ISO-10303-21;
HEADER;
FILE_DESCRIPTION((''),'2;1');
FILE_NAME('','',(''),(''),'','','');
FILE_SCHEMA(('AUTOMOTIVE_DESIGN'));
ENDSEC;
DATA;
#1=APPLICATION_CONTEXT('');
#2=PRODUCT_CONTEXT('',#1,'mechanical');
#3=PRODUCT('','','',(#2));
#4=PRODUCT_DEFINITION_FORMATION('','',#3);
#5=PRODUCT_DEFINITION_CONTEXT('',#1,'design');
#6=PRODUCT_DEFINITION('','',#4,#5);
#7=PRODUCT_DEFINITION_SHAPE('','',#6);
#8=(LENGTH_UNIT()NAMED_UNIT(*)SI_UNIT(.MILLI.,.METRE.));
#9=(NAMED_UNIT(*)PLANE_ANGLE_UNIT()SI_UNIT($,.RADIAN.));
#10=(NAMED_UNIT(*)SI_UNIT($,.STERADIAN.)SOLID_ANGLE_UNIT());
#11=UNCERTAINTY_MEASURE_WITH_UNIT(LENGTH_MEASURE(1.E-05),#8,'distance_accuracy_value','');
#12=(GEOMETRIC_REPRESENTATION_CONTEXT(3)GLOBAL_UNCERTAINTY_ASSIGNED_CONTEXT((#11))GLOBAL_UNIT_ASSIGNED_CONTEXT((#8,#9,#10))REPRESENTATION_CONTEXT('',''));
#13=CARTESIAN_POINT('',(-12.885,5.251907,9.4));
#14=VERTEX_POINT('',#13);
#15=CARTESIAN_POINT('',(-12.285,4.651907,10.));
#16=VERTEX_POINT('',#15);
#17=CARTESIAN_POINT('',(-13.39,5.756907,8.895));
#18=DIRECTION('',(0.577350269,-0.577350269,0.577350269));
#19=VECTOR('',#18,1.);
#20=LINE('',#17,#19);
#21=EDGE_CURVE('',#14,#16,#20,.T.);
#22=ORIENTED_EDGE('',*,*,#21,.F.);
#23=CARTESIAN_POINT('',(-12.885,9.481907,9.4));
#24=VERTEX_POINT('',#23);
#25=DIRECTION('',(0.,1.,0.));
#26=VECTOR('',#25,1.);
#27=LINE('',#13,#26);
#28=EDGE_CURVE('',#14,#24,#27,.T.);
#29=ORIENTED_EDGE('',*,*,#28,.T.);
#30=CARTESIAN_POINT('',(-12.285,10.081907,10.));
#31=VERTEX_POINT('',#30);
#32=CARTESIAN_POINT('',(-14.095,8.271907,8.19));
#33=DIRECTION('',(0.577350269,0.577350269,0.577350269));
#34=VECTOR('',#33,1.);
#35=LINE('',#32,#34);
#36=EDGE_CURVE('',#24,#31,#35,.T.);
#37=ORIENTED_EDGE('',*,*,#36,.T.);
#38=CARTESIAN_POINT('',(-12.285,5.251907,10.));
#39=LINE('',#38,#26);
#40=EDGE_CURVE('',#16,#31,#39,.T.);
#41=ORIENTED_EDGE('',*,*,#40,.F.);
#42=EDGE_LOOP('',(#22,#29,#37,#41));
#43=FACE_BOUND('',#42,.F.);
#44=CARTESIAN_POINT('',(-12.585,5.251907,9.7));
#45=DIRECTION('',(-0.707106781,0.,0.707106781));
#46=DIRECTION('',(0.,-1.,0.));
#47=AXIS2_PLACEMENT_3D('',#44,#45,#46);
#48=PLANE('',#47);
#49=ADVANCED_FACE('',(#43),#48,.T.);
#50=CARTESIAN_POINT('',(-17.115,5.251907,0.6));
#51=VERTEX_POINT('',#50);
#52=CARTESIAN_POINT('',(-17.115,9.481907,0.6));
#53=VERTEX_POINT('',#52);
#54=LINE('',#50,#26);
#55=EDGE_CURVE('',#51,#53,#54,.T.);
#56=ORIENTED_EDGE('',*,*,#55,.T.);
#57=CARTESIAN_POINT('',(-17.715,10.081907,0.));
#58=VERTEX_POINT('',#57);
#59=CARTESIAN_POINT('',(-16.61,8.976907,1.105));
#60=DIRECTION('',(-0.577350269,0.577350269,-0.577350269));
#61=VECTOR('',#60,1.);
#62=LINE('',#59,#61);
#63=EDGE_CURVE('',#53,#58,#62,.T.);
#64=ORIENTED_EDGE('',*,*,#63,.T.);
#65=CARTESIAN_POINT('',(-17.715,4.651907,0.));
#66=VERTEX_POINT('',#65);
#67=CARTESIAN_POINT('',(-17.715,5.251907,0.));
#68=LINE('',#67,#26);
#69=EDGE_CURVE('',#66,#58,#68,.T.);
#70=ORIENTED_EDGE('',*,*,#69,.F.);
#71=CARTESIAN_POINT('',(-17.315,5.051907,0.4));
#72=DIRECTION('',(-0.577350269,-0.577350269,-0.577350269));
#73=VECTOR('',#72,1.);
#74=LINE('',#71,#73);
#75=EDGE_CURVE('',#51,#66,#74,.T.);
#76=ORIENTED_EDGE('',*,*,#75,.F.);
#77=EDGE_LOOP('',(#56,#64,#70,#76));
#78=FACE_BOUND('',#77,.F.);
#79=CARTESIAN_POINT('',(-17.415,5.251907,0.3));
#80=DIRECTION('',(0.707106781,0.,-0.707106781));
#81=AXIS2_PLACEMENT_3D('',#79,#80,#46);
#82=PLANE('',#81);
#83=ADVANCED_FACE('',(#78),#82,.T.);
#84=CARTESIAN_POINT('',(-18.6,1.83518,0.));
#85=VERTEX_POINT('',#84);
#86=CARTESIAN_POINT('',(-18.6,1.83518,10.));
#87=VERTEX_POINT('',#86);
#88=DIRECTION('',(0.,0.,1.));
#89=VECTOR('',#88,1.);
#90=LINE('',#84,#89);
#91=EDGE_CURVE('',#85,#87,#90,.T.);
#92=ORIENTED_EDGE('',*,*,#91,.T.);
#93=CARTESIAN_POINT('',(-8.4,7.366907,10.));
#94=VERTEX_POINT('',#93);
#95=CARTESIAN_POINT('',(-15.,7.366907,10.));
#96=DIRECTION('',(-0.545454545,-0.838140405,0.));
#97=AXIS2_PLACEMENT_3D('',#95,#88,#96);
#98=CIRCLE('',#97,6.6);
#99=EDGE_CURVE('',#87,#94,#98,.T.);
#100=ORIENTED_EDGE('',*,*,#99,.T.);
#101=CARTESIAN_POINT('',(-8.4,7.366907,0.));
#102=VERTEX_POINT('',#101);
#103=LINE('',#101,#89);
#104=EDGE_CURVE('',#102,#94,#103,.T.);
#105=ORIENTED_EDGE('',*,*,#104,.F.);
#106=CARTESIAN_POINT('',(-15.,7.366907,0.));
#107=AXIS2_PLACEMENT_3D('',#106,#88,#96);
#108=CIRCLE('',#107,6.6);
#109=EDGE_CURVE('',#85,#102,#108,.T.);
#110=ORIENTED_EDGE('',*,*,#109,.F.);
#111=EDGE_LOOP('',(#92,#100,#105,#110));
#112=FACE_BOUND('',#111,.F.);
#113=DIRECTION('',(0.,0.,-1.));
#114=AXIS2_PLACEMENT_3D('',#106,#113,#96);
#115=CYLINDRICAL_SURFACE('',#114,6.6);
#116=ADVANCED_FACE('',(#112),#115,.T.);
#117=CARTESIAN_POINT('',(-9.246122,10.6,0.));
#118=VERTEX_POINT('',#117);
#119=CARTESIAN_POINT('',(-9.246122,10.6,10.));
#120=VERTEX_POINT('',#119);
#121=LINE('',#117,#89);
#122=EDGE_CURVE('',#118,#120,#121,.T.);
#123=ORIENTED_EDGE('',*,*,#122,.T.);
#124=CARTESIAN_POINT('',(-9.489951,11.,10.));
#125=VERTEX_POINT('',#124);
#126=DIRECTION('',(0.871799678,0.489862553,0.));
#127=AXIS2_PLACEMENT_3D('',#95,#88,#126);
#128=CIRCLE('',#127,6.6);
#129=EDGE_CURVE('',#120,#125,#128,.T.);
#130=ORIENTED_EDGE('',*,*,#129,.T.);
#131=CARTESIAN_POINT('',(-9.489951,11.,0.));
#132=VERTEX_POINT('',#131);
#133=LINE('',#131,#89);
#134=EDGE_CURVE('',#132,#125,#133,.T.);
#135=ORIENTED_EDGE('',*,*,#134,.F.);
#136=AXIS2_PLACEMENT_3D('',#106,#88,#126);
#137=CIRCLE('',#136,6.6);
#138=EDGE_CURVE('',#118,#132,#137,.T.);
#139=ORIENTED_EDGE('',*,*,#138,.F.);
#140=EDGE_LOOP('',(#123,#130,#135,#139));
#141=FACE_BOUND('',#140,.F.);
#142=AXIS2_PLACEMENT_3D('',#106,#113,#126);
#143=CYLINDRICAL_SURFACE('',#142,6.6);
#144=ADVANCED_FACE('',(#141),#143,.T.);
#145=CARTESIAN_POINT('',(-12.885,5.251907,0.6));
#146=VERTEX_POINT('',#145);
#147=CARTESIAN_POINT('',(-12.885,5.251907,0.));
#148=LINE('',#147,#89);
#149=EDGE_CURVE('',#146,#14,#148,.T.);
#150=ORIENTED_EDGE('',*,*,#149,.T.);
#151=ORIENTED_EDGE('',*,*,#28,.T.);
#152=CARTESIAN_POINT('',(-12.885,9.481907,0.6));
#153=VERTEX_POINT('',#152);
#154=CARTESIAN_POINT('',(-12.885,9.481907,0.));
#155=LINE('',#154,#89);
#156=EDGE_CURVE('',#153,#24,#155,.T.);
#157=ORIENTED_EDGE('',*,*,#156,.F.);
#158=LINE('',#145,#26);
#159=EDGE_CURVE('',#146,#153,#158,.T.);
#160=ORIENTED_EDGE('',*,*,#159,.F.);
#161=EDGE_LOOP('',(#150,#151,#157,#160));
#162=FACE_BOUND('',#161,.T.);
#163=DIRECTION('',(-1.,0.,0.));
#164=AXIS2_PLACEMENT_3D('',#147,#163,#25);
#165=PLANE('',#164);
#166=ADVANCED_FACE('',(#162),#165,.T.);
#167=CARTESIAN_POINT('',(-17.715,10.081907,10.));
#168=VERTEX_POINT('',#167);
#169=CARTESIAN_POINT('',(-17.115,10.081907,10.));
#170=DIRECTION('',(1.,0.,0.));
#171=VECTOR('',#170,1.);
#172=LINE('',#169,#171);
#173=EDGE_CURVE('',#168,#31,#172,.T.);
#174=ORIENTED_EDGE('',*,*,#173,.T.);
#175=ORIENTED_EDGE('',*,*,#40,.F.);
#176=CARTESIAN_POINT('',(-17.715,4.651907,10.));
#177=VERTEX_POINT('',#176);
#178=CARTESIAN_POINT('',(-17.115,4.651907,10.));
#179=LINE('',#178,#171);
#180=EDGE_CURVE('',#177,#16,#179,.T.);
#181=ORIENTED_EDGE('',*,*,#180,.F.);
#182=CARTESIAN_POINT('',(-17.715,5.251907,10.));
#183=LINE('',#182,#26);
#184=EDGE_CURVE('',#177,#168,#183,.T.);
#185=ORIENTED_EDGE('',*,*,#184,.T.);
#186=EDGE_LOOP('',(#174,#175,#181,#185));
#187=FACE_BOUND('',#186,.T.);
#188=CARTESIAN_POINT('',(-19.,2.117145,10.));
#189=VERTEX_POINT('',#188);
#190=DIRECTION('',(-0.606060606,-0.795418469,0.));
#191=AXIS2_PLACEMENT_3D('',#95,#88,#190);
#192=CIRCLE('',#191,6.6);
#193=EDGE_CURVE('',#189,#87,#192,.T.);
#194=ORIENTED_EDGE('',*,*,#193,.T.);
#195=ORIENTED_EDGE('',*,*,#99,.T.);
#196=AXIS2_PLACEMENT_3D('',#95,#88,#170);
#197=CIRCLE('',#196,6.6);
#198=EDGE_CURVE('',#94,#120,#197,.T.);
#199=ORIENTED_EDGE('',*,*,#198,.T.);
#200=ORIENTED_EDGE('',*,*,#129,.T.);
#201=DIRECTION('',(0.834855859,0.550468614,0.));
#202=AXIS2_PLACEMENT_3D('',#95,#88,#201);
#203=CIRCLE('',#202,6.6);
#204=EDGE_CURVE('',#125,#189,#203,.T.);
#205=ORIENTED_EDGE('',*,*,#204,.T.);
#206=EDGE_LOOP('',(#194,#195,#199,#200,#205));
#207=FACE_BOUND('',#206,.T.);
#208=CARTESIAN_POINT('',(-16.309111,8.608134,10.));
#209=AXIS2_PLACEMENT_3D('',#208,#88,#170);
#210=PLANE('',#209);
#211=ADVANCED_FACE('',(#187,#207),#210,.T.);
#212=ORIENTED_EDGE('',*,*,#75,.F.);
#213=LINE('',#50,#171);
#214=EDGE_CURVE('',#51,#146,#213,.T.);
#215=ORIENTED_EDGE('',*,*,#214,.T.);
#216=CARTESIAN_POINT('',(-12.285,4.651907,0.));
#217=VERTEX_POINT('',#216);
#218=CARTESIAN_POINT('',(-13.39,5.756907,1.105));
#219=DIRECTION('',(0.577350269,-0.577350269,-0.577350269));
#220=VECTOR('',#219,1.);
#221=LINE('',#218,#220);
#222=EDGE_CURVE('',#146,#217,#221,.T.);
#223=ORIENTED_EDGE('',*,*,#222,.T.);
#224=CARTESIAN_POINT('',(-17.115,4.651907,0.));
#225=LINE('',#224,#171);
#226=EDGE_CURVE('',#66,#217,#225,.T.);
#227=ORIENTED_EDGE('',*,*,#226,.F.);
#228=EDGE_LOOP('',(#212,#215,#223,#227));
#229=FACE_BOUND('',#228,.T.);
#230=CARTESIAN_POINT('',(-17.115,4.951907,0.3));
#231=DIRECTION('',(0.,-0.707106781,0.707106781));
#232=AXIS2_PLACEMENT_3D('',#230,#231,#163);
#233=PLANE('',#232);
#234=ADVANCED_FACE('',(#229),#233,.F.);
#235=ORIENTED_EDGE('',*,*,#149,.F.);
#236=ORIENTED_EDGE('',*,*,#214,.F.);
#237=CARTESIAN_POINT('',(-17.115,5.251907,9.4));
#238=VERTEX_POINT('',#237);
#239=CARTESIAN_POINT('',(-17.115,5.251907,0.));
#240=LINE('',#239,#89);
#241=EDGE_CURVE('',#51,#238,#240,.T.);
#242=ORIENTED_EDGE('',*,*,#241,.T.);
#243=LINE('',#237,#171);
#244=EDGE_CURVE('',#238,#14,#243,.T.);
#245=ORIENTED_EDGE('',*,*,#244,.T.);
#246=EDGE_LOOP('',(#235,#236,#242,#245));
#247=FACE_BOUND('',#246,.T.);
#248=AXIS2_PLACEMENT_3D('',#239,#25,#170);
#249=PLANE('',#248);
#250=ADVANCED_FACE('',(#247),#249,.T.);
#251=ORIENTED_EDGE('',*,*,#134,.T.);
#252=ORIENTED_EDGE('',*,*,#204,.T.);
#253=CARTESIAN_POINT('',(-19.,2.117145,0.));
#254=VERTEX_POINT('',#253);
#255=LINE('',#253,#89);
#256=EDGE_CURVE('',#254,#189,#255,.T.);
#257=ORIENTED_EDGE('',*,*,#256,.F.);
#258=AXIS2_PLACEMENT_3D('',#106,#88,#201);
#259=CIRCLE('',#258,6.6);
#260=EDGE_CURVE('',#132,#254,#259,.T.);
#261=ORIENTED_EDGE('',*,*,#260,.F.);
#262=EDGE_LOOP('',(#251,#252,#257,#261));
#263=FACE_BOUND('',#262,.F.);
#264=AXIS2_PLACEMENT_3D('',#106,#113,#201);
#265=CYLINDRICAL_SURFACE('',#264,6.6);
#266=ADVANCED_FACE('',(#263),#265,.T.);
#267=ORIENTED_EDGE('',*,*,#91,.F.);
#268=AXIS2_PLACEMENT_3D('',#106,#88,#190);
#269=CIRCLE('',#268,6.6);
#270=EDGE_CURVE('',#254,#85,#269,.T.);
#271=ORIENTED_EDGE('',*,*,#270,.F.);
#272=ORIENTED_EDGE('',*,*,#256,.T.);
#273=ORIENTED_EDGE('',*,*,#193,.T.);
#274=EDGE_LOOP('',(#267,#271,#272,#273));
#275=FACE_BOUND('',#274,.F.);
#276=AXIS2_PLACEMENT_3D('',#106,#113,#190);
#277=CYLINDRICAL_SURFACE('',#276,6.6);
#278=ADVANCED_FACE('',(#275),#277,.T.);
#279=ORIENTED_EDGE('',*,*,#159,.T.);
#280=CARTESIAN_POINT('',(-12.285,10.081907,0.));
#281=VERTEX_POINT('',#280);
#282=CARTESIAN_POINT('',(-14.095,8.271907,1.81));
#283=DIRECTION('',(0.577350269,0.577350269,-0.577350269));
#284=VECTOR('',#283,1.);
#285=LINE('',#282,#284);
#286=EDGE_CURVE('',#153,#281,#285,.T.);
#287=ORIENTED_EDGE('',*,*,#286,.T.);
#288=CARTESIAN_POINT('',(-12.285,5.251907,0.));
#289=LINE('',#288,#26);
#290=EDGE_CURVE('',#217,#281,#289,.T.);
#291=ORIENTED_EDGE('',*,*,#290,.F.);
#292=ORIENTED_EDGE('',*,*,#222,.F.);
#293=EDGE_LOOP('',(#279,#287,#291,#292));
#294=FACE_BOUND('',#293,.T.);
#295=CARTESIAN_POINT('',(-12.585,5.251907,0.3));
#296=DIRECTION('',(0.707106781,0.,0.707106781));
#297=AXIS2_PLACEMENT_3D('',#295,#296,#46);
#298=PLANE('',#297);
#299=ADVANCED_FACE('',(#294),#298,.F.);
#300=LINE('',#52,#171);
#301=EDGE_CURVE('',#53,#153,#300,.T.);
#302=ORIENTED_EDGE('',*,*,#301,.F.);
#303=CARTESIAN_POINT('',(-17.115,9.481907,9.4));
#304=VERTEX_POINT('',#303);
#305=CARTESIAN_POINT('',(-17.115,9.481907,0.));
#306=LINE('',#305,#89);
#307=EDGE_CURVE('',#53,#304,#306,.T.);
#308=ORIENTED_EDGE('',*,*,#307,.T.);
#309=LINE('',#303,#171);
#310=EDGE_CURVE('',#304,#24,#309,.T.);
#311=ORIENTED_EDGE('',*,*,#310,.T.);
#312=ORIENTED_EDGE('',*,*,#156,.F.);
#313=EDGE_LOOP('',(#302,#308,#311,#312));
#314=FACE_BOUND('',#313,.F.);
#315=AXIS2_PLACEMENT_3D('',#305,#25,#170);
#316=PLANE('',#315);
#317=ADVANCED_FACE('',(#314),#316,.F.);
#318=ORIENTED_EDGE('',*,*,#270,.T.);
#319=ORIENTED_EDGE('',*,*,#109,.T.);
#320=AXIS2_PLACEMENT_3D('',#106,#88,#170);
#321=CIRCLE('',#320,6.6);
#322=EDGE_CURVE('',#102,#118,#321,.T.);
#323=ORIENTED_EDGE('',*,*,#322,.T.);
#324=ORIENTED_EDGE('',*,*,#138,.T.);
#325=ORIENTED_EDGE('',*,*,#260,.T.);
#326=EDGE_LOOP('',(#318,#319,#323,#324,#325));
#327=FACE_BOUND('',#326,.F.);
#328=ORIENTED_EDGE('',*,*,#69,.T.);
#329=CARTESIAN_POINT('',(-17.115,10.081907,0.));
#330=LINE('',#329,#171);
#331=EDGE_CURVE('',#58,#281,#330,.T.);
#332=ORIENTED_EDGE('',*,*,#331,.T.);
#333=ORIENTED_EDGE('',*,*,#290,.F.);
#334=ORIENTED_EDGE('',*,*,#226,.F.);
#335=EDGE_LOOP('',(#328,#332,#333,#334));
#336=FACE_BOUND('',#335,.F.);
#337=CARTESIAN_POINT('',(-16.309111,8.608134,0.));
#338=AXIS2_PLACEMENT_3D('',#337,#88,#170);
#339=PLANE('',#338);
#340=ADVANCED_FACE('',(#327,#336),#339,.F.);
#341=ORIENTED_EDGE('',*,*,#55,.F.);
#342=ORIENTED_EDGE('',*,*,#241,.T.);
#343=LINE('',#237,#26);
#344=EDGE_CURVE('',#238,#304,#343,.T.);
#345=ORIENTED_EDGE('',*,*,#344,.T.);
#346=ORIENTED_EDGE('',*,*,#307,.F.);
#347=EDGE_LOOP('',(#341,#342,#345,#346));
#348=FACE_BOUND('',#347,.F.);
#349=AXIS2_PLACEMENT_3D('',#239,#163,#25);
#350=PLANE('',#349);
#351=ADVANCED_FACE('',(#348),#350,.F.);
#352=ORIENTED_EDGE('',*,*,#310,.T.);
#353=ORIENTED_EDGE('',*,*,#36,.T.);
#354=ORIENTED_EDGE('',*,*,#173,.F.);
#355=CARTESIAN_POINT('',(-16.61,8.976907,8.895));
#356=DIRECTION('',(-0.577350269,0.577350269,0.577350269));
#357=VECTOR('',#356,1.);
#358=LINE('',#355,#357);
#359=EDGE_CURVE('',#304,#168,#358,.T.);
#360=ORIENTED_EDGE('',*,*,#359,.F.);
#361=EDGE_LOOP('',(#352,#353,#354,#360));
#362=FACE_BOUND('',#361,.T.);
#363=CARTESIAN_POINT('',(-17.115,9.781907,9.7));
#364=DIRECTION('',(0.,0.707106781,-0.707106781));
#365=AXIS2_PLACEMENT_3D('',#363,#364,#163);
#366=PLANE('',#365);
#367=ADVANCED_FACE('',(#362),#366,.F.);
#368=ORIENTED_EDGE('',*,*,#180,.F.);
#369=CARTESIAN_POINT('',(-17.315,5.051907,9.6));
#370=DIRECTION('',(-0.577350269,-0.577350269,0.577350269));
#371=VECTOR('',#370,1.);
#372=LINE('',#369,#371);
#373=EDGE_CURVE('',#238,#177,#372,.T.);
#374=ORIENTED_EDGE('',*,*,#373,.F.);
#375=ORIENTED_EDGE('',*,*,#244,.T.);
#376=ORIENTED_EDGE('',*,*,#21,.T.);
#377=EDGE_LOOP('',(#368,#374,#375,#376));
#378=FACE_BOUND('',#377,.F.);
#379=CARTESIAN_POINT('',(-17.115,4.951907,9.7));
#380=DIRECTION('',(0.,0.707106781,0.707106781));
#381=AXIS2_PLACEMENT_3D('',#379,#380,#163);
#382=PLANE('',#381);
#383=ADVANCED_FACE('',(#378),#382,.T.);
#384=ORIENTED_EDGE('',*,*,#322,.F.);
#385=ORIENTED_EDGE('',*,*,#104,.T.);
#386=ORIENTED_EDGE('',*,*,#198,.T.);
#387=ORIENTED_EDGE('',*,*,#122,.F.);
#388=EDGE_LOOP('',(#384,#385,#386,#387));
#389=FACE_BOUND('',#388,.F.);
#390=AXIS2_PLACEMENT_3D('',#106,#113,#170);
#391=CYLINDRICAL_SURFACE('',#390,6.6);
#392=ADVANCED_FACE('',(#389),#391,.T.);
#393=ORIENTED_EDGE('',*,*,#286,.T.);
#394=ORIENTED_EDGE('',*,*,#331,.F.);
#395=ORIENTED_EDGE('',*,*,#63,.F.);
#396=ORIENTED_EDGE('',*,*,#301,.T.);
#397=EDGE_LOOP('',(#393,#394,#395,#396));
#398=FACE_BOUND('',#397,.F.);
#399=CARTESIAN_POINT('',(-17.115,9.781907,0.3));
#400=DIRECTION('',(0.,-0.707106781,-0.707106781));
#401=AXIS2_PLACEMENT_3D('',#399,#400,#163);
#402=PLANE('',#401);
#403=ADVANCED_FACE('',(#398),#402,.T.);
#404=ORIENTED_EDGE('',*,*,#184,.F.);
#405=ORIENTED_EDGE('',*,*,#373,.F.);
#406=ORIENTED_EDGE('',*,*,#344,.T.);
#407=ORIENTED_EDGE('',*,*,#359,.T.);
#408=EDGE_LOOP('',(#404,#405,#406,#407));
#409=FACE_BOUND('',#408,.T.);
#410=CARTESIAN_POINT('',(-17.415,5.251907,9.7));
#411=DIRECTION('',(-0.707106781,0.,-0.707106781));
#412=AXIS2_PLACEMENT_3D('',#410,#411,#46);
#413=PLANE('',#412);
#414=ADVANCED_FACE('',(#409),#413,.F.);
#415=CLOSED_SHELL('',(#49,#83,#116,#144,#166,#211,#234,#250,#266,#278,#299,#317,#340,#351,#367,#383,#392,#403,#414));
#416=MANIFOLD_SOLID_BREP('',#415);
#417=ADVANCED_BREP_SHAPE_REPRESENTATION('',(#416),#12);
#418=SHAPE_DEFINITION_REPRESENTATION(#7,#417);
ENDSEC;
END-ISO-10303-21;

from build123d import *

# Parameters (mm, degrees)
F0_W     = 4.23
F0_H     = 4.23
F1_DEPTH = 10
F2_SIZE  = 0.6


# Not quite as in the source:
# - two fillets or chamfers of one size are made in one step


with BuildPart() as f1:
    # F0 (on Top) → F1 (new body)
    with BuildSketch(Plane.XY):
        with BuildLine():
            Line((-18.6, 10.6), (-9.2461221228, 10.6))
            ThreePointArc((-9.2461221228, 10.6), (-9.3644866857, 10.802164009), (-9.4899513299, 11))
            Line((-9.4899513299, 11), (-19, 11))
            Line((-19, 11), (-19, 2.1171452511))
            ThreePointArc((-19, 2.1171452511), (-18.8026143682, 1.9724540765), (-18.6, 1.8351804761))
            Line((-18.6, 1.8351804761), (-18.6, 10.6))
        make_face()
        with BuildLine():
            Line((-19, 11), (-9.4899513299, 11))
            ThreePointArc((-9.4899513299, 11), (-19.5051458211, 12.1901489162), (-19, 2.1171452511))
            Line((-19, 2.1171452511), (-19, 11))
        make_face()
        with BuildLine():
            ThreePointArc((-18.6, 1.8351804761), (-11.8535734555, 1.5651832687), (-8.4, 7.3669071504))
            ThreePointArc((-8.4, 7.3669071504), (-8.6150335165, 9.0378957815), (-9.2461221228, 10.6))
            Line((-9.2461221228, 10.6), (-18.6, 10.6))
            Line((-18.6, 10.6), (-18.6, 1.8351804761))
        make_face()
        with Locations((-15, 7.3669071504)):
            Rectangle(F0_W, F0_H, mode=Mode.SUBTRACT)
    extrude(amount=F1_DEPTH)

    # F2
    f2_edges = [f1.edges().sort_by_distance(p)[0] for p in [
        (-17.115, 7.366907, 10),
        (-15, 5.251907, 10),
        (-12.885, 7.366907, 10),
        (-15, 9.481907, 10),
        (-17.115, 7.366907, 0),
        (-15, 9.481907, 0),
        (-12.885, 7.366907, 0),
        (-15, 5.251907, 0),
    ]]
    chamfer(f2_edges, length=F2_SIZE)


solid = f1.part
